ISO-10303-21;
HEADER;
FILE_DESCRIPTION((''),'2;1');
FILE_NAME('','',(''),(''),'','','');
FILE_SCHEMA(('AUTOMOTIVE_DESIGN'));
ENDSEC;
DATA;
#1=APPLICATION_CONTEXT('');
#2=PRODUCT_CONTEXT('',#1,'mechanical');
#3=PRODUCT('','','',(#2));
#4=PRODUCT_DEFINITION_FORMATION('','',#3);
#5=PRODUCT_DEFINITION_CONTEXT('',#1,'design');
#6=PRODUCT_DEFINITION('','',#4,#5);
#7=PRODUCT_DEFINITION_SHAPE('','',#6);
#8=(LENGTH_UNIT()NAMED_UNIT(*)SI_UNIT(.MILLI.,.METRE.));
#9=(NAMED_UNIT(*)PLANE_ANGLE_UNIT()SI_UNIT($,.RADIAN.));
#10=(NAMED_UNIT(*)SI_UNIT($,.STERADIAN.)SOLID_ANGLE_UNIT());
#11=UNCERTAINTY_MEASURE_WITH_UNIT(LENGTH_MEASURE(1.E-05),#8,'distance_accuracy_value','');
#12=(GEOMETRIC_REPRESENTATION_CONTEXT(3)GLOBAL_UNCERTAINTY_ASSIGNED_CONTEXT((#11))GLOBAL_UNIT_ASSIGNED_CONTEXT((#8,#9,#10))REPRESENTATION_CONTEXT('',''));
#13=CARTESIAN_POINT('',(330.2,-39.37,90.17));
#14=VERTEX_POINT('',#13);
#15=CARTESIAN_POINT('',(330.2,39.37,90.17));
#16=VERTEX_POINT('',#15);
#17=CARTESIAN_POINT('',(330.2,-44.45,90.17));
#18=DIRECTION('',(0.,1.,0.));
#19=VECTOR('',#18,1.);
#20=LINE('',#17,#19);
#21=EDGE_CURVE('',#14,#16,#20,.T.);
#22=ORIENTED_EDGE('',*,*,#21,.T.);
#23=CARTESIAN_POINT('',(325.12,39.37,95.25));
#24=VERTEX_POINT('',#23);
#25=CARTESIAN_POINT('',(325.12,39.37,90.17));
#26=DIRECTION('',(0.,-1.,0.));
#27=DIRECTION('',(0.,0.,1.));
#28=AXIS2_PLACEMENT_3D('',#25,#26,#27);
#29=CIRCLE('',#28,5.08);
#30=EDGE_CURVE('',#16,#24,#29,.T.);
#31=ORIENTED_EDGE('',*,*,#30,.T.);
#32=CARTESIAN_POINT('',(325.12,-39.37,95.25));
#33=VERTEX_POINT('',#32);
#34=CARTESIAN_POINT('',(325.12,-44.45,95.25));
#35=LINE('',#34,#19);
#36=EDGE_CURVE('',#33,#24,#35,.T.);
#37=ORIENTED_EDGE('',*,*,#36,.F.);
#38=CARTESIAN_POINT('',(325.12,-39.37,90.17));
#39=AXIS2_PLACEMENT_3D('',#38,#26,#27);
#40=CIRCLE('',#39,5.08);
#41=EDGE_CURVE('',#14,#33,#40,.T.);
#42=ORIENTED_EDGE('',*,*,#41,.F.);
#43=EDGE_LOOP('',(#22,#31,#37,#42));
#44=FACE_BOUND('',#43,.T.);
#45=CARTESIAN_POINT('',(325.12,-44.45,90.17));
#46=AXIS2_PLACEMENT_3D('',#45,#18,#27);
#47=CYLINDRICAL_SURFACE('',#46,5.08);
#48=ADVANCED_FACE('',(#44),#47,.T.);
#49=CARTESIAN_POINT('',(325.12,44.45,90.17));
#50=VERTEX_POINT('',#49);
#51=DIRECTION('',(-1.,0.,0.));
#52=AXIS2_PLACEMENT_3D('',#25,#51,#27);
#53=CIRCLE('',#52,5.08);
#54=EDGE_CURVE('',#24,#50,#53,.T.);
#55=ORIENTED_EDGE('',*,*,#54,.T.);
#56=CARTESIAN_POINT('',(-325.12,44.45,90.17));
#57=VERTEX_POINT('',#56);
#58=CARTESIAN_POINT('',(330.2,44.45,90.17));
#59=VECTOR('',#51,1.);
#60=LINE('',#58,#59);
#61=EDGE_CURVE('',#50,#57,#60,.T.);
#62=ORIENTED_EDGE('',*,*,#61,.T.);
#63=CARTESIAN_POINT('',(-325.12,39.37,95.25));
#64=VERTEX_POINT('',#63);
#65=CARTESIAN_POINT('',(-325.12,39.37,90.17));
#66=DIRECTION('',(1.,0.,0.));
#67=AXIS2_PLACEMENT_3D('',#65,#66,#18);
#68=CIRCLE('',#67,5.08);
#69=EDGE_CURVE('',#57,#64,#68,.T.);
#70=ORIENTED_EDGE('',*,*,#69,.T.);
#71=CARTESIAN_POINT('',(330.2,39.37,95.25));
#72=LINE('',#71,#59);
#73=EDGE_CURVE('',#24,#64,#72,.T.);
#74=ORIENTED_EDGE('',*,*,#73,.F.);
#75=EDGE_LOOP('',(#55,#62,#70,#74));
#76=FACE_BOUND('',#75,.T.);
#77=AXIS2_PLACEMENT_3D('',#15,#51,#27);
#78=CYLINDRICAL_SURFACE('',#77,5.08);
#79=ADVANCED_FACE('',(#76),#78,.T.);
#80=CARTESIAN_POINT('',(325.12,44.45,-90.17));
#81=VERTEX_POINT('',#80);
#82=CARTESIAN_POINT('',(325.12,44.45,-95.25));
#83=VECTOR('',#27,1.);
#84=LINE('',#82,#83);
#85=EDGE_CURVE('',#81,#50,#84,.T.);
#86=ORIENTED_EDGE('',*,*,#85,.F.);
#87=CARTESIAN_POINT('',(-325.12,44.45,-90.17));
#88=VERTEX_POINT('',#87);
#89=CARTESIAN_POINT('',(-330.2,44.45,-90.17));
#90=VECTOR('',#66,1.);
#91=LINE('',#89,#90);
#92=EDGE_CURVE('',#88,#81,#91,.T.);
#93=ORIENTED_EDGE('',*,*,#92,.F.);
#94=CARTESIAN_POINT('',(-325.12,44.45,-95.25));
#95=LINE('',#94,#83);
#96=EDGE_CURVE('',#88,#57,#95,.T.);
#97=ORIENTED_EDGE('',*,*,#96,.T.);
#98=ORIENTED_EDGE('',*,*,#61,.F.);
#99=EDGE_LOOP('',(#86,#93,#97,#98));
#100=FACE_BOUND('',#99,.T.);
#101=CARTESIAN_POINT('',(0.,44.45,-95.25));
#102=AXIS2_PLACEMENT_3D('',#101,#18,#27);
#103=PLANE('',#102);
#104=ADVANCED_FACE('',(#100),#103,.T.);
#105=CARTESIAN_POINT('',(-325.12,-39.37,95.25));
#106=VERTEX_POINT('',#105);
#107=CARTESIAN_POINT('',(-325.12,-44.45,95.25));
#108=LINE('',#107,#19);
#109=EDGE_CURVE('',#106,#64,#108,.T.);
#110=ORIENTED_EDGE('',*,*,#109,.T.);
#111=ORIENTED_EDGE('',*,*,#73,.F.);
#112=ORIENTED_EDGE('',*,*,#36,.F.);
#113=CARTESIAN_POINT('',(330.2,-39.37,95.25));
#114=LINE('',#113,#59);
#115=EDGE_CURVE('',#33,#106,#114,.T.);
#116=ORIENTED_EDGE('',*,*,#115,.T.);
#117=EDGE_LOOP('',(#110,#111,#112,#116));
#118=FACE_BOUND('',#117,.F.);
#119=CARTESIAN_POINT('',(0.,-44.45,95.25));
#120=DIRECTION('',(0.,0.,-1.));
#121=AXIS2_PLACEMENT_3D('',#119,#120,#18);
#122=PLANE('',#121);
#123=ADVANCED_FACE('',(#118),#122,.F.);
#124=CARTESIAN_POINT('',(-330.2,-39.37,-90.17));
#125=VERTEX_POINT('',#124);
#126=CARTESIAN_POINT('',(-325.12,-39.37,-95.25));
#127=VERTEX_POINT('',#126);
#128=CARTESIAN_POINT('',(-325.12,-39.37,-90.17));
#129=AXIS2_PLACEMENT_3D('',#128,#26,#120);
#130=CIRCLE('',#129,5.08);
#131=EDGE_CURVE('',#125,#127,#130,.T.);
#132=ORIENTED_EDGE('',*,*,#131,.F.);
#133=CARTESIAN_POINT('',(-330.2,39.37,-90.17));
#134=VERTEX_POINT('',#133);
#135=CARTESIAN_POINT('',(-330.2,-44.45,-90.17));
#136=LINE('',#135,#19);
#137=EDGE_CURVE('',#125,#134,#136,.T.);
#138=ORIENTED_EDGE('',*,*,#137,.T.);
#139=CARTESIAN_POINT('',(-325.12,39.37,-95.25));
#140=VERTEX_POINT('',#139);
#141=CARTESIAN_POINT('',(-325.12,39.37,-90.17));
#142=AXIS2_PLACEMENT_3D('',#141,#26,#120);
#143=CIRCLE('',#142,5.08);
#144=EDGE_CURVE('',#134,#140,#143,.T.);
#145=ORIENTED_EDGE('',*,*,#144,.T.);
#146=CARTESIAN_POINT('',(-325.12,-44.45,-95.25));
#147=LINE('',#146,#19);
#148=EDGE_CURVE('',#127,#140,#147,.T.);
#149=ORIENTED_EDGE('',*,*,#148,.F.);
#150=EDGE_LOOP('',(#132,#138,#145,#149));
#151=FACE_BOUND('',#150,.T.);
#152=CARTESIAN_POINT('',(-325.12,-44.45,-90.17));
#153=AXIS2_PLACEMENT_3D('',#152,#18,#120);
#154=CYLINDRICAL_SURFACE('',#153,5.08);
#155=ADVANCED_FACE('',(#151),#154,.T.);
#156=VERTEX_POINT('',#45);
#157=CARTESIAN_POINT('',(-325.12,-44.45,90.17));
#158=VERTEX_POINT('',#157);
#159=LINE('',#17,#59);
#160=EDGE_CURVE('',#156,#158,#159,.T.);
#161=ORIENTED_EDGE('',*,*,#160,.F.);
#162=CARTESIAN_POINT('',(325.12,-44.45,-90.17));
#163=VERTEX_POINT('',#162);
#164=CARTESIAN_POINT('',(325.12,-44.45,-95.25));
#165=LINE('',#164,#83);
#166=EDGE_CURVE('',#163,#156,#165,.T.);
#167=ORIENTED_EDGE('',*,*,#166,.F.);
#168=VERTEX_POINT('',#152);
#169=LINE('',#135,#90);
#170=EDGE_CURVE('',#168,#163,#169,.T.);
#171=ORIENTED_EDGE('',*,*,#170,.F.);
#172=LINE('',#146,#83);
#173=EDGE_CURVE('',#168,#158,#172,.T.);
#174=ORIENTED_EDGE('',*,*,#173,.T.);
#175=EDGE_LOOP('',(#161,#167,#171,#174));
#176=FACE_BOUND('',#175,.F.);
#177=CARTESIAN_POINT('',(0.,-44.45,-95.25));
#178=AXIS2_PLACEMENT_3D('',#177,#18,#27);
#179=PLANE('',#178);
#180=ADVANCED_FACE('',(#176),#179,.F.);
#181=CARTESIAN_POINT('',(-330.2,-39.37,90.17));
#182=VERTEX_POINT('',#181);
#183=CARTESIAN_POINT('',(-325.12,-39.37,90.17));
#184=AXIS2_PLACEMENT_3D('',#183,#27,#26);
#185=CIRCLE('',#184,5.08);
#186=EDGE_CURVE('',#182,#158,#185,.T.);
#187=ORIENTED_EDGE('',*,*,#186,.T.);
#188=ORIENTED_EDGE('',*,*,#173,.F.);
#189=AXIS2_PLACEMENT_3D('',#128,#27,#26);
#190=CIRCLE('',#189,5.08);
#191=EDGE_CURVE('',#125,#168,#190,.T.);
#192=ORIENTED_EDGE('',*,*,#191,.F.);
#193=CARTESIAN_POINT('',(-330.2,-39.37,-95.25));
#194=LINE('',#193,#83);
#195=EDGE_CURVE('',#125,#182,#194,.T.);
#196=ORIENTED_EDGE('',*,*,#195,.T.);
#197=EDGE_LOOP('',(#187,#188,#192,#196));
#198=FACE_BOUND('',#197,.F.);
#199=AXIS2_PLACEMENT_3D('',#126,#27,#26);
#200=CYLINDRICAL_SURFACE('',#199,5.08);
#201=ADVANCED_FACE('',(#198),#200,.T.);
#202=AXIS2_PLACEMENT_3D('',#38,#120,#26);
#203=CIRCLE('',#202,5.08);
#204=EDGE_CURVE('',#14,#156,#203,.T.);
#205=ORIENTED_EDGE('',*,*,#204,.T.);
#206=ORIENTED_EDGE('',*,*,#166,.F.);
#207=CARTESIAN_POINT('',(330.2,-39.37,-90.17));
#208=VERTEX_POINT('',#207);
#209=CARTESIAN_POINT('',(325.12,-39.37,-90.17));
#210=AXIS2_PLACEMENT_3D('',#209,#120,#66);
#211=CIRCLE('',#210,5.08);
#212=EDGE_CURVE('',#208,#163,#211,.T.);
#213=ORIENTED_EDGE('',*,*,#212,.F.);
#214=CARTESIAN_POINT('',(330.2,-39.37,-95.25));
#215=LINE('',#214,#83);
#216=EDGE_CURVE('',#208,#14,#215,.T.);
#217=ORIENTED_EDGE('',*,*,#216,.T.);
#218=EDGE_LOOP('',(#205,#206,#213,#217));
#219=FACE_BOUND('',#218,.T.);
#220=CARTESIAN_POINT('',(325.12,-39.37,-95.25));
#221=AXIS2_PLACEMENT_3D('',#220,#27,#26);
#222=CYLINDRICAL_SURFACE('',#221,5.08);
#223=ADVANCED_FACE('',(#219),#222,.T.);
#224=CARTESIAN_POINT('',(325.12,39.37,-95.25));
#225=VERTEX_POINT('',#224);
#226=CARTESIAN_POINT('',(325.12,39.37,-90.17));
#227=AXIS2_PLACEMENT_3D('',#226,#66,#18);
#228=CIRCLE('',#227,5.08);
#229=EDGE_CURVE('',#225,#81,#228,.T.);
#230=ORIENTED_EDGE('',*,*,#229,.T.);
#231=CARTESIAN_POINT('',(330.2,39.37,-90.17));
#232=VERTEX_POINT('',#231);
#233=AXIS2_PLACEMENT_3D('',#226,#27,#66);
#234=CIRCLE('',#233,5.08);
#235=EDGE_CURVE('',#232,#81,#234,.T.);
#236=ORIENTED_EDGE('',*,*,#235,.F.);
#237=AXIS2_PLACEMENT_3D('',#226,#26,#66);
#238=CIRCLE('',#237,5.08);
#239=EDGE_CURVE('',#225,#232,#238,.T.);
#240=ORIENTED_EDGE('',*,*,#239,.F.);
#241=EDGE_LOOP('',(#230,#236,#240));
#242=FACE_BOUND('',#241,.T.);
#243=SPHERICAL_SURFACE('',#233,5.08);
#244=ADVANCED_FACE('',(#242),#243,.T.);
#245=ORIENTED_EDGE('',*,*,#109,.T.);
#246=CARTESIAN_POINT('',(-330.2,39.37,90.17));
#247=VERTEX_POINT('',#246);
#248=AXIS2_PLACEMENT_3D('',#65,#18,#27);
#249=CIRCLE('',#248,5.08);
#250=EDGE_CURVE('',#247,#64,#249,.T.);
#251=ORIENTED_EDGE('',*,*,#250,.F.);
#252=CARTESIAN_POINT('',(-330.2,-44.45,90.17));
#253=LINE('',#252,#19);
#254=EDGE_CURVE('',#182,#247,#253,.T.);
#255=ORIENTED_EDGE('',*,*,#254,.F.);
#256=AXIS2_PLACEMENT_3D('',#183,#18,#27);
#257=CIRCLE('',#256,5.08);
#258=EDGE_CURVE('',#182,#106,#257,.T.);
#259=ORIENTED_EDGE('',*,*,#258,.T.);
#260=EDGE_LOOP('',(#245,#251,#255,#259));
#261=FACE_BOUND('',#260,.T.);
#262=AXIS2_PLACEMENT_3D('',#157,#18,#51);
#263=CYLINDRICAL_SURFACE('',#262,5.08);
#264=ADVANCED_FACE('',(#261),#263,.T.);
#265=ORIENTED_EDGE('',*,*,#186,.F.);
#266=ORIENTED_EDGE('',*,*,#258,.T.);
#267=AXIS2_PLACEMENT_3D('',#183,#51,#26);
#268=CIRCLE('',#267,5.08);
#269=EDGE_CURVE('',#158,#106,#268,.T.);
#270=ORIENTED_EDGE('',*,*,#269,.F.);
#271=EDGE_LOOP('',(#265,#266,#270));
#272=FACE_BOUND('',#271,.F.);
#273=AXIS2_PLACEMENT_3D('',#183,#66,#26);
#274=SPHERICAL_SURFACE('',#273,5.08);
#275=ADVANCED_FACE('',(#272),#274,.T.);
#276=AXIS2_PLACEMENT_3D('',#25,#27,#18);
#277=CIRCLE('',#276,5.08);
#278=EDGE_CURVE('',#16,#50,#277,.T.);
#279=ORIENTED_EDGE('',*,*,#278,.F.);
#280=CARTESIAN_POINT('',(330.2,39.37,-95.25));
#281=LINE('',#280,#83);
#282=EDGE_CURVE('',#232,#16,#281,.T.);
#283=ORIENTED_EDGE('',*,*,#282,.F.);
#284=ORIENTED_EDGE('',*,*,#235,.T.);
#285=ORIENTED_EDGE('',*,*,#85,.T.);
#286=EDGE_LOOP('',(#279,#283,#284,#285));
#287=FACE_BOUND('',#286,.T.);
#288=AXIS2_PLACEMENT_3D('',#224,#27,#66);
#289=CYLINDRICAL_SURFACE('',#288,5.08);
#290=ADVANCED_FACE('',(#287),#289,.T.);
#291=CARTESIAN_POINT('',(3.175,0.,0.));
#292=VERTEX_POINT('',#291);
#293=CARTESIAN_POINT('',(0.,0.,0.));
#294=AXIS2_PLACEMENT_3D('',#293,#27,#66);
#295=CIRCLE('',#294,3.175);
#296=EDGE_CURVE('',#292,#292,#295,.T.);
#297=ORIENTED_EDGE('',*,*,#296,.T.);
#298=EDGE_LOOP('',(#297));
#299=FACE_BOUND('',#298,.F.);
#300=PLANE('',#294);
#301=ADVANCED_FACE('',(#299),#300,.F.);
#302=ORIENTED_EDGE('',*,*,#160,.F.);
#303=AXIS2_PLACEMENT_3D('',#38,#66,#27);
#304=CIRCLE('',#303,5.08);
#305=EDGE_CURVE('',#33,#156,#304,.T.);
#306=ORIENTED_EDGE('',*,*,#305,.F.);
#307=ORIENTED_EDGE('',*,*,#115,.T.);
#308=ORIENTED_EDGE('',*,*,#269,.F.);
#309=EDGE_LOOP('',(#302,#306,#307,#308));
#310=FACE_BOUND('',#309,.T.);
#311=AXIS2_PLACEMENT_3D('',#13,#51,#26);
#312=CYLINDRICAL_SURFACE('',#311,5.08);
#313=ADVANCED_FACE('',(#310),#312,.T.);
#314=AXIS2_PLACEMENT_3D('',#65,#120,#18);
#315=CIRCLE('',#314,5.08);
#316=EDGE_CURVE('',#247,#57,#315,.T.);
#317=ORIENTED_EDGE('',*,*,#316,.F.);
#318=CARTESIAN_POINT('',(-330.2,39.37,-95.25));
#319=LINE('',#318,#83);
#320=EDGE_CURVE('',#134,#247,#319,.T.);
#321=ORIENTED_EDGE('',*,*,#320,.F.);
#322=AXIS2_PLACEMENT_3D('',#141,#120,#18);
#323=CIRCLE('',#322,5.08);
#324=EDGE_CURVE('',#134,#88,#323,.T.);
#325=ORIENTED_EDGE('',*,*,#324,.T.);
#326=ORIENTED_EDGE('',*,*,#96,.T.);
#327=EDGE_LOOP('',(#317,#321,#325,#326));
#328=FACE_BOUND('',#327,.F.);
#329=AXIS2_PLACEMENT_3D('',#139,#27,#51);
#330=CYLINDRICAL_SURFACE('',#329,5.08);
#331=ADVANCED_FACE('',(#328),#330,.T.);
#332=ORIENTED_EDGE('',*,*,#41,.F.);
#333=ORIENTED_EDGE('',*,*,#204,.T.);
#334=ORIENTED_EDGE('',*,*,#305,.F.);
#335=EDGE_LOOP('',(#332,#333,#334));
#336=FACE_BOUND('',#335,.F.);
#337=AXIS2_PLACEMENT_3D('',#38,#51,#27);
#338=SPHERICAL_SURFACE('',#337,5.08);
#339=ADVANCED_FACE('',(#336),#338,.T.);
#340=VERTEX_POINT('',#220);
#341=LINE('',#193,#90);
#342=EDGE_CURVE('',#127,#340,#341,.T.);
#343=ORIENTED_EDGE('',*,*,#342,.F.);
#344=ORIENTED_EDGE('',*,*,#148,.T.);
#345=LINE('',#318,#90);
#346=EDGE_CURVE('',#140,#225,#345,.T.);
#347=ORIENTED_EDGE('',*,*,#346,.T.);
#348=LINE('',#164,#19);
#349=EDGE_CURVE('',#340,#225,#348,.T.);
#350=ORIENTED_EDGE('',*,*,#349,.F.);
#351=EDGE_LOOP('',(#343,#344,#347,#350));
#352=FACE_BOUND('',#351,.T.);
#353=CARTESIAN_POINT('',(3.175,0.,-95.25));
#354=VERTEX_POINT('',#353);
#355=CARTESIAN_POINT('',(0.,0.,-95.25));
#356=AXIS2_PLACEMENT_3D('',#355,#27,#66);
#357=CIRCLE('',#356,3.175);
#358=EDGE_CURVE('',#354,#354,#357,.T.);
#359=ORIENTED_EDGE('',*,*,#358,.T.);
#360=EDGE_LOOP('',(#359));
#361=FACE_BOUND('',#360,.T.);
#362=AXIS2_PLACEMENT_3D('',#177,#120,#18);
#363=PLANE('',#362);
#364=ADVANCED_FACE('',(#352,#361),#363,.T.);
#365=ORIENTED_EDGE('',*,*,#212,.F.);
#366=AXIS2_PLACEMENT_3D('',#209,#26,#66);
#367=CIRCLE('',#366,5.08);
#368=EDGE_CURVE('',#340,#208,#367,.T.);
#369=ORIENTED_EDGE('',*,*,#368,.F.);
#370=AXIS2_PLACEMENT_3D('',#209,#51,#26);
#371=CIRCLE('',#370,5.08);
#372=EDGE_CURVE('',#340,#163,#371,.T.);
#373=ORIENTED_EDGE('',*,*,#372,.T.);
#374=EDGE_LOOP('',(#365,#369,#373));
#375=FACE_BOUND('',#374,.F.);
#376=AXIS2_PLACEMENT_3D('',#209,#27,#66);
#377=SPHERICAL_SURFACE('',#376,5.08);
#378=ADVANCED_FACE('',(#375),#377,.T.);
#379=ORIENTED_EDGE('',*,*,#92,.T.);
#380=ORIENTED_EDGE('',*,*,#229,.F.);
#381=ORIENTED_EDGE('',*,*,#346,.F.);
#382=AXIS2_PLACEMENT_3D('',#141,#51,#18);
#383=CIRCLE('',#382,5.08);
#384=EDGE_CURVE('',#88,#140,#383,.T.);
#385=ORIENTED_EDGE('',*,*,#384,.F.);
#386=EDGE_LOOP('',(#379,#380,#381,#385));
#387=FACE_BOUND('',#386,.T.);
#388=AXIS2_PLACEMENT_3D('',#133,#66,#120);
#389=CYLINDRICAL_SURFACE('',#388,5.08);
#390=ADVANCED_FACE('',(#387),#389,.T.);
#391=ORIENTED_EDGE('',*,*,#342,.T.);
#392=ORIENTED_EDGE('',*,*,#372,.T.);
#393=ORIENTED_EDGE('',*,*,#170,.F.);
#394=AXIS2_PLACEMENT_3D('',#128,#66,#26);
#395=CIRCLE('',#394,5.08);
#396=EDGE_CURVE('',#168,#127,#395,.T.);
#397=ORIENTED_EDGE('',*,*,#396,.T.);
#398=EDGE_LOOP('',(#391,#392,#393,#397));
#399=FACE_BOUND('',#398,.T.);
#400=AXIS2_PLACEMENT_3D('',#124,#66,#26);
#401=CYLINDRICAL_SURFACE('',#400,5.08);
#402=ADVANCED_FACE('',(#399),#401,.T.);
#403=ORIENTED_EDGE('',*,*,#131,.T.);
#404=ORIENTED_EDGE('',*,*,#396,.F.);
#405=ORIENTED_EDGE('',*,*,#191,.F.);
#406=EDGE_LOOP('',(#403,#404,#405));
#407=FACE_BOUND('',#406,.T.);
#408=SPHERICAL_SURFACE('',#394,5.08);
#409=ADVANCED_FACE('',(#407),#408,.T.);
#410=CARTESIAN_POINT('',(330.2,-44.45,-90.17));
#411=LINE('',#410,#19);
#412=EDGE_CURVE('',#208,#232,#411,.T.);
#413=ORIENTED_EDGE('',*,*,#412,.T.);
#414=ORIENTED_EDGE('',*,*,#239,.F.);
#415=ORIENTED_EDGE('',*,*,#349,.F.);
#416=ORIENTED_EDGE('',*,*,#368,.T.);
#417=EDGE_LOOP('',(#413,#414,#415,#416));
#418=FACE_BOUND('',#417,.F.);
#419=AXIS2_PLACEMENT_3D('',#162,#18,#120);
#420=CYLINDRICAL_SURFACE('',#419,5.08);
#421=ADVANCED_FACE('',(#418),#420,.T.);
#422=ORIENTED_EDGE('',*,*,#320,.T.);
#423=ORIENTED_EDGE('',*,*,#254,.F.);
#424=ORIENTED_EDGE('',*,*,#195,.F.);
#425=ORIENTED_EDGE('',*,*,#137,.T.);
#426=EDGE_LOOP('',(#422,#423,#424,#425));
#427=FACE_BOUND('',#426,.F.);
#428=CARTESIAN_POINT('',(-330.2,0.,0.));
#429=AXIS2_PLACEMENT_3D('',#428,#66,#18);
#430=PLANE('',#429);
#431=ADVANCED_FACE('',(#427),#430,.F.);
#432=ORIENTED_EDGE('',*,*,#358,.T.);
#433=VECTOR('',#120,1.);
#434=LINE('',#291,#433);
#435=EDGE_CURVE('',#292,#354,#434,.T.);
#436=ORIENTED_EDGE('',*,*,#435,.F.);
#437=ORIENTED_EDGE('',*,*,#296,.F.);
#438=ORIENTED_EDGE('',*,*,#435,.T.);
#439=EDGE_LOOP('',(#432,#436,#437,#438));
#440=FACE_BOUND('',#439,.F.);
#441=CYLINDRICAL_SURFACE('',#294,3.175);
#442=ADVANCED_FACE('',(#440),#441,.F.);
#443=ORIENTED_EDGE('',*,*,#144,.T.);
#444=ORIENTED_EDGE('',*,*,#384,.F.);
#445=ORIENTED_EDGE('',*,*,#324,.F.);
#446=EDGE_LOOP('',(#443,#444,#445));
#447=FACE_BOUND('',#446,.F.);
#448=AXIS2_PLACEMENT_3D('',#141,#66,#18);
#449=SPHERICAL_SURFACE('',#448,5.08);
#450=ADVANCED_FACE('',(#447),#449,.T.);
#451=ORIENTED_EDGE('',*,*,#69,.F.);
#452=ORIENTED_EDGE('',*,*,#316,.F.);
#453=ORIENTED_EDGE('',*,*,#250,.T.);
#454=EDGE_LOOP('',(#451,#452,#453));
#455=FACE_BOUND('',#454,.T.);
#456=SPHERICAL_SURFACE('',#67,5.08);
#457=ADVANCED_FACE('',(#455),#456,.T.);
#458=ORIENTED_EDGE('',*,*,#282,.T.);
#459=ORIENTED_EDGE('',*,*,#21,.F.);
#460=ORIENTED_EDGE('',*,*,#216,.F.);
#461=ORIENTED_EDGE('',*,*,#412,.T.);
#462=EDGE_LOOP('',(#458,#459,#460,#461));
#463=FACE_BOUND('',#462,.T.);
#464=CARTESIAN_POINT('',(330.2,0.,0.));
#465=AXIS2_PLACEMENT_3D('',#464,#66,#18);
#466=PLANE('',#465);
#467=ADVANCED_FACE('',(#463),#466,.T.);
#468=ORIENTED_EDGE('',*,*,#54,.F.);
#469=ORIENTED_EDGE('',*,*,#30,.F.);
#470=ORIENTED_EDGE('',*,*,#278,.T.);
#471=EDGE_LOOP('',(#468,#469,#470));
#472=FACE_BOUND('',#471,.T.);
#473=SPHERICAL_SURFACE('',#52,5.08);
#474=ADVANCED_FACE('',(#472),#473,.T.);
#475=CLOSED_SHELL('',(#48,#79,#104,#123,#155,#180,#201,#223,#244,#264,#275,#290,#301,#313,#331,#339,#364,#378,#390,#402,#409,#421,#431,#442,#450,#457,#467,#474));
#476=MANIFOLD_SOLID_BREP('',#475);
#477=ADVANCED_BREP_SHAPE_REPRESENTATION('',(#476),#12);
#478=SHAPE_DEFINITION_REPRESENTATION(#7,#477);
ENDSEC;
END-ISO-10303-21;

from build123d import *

# Parameters (mm, degrees)
F0_W     = 88.9
F0_H     = 190.5
F1_DEPTH = 330.2
F3_D     = 6.35
F3_DEPTH = 95.251
F4_R     = 5.08


with BuildPart() as f1:
    # F0 (on Right) → F1 (new body, symmetric)
    with BuildSketch(Plane.YZ):
        Rectangle(F0_W, F0_H)
    extrude(amount=F1_DEPTH, both=True)

    # F3 (through all, one way)
    with BuildSketch(Plane.XY):
        with Locations((0, 0)):
            Circle(F3_D / 2)
    extrude(amount=-F3_DEPTH, mode=Mode.SUBTRACT)

    # F4
    f4_edges = [f1.edges().sort_by_distance(p)[0] for p in [
        (0, -44.45, 95.25),
        (0, 44.45, 95.25),
        (330.2, 0, 95.25),
        (330.2, 44.45, 0),
        (330.2, -44.45, 0),
        (330.2, 0, -95.25),
        (0, -44.45, -95.25),
        (0, 44.45, -95.25),
        (-330.2, -44.45, 0),
        (-330.2, 44.45, 0),
        (-330.2, 0, 95.25),
        (-330.2, 0, -95.25),
    ]]
    fillet(f4_edges, radius=F4_R)


solid = f1.part
